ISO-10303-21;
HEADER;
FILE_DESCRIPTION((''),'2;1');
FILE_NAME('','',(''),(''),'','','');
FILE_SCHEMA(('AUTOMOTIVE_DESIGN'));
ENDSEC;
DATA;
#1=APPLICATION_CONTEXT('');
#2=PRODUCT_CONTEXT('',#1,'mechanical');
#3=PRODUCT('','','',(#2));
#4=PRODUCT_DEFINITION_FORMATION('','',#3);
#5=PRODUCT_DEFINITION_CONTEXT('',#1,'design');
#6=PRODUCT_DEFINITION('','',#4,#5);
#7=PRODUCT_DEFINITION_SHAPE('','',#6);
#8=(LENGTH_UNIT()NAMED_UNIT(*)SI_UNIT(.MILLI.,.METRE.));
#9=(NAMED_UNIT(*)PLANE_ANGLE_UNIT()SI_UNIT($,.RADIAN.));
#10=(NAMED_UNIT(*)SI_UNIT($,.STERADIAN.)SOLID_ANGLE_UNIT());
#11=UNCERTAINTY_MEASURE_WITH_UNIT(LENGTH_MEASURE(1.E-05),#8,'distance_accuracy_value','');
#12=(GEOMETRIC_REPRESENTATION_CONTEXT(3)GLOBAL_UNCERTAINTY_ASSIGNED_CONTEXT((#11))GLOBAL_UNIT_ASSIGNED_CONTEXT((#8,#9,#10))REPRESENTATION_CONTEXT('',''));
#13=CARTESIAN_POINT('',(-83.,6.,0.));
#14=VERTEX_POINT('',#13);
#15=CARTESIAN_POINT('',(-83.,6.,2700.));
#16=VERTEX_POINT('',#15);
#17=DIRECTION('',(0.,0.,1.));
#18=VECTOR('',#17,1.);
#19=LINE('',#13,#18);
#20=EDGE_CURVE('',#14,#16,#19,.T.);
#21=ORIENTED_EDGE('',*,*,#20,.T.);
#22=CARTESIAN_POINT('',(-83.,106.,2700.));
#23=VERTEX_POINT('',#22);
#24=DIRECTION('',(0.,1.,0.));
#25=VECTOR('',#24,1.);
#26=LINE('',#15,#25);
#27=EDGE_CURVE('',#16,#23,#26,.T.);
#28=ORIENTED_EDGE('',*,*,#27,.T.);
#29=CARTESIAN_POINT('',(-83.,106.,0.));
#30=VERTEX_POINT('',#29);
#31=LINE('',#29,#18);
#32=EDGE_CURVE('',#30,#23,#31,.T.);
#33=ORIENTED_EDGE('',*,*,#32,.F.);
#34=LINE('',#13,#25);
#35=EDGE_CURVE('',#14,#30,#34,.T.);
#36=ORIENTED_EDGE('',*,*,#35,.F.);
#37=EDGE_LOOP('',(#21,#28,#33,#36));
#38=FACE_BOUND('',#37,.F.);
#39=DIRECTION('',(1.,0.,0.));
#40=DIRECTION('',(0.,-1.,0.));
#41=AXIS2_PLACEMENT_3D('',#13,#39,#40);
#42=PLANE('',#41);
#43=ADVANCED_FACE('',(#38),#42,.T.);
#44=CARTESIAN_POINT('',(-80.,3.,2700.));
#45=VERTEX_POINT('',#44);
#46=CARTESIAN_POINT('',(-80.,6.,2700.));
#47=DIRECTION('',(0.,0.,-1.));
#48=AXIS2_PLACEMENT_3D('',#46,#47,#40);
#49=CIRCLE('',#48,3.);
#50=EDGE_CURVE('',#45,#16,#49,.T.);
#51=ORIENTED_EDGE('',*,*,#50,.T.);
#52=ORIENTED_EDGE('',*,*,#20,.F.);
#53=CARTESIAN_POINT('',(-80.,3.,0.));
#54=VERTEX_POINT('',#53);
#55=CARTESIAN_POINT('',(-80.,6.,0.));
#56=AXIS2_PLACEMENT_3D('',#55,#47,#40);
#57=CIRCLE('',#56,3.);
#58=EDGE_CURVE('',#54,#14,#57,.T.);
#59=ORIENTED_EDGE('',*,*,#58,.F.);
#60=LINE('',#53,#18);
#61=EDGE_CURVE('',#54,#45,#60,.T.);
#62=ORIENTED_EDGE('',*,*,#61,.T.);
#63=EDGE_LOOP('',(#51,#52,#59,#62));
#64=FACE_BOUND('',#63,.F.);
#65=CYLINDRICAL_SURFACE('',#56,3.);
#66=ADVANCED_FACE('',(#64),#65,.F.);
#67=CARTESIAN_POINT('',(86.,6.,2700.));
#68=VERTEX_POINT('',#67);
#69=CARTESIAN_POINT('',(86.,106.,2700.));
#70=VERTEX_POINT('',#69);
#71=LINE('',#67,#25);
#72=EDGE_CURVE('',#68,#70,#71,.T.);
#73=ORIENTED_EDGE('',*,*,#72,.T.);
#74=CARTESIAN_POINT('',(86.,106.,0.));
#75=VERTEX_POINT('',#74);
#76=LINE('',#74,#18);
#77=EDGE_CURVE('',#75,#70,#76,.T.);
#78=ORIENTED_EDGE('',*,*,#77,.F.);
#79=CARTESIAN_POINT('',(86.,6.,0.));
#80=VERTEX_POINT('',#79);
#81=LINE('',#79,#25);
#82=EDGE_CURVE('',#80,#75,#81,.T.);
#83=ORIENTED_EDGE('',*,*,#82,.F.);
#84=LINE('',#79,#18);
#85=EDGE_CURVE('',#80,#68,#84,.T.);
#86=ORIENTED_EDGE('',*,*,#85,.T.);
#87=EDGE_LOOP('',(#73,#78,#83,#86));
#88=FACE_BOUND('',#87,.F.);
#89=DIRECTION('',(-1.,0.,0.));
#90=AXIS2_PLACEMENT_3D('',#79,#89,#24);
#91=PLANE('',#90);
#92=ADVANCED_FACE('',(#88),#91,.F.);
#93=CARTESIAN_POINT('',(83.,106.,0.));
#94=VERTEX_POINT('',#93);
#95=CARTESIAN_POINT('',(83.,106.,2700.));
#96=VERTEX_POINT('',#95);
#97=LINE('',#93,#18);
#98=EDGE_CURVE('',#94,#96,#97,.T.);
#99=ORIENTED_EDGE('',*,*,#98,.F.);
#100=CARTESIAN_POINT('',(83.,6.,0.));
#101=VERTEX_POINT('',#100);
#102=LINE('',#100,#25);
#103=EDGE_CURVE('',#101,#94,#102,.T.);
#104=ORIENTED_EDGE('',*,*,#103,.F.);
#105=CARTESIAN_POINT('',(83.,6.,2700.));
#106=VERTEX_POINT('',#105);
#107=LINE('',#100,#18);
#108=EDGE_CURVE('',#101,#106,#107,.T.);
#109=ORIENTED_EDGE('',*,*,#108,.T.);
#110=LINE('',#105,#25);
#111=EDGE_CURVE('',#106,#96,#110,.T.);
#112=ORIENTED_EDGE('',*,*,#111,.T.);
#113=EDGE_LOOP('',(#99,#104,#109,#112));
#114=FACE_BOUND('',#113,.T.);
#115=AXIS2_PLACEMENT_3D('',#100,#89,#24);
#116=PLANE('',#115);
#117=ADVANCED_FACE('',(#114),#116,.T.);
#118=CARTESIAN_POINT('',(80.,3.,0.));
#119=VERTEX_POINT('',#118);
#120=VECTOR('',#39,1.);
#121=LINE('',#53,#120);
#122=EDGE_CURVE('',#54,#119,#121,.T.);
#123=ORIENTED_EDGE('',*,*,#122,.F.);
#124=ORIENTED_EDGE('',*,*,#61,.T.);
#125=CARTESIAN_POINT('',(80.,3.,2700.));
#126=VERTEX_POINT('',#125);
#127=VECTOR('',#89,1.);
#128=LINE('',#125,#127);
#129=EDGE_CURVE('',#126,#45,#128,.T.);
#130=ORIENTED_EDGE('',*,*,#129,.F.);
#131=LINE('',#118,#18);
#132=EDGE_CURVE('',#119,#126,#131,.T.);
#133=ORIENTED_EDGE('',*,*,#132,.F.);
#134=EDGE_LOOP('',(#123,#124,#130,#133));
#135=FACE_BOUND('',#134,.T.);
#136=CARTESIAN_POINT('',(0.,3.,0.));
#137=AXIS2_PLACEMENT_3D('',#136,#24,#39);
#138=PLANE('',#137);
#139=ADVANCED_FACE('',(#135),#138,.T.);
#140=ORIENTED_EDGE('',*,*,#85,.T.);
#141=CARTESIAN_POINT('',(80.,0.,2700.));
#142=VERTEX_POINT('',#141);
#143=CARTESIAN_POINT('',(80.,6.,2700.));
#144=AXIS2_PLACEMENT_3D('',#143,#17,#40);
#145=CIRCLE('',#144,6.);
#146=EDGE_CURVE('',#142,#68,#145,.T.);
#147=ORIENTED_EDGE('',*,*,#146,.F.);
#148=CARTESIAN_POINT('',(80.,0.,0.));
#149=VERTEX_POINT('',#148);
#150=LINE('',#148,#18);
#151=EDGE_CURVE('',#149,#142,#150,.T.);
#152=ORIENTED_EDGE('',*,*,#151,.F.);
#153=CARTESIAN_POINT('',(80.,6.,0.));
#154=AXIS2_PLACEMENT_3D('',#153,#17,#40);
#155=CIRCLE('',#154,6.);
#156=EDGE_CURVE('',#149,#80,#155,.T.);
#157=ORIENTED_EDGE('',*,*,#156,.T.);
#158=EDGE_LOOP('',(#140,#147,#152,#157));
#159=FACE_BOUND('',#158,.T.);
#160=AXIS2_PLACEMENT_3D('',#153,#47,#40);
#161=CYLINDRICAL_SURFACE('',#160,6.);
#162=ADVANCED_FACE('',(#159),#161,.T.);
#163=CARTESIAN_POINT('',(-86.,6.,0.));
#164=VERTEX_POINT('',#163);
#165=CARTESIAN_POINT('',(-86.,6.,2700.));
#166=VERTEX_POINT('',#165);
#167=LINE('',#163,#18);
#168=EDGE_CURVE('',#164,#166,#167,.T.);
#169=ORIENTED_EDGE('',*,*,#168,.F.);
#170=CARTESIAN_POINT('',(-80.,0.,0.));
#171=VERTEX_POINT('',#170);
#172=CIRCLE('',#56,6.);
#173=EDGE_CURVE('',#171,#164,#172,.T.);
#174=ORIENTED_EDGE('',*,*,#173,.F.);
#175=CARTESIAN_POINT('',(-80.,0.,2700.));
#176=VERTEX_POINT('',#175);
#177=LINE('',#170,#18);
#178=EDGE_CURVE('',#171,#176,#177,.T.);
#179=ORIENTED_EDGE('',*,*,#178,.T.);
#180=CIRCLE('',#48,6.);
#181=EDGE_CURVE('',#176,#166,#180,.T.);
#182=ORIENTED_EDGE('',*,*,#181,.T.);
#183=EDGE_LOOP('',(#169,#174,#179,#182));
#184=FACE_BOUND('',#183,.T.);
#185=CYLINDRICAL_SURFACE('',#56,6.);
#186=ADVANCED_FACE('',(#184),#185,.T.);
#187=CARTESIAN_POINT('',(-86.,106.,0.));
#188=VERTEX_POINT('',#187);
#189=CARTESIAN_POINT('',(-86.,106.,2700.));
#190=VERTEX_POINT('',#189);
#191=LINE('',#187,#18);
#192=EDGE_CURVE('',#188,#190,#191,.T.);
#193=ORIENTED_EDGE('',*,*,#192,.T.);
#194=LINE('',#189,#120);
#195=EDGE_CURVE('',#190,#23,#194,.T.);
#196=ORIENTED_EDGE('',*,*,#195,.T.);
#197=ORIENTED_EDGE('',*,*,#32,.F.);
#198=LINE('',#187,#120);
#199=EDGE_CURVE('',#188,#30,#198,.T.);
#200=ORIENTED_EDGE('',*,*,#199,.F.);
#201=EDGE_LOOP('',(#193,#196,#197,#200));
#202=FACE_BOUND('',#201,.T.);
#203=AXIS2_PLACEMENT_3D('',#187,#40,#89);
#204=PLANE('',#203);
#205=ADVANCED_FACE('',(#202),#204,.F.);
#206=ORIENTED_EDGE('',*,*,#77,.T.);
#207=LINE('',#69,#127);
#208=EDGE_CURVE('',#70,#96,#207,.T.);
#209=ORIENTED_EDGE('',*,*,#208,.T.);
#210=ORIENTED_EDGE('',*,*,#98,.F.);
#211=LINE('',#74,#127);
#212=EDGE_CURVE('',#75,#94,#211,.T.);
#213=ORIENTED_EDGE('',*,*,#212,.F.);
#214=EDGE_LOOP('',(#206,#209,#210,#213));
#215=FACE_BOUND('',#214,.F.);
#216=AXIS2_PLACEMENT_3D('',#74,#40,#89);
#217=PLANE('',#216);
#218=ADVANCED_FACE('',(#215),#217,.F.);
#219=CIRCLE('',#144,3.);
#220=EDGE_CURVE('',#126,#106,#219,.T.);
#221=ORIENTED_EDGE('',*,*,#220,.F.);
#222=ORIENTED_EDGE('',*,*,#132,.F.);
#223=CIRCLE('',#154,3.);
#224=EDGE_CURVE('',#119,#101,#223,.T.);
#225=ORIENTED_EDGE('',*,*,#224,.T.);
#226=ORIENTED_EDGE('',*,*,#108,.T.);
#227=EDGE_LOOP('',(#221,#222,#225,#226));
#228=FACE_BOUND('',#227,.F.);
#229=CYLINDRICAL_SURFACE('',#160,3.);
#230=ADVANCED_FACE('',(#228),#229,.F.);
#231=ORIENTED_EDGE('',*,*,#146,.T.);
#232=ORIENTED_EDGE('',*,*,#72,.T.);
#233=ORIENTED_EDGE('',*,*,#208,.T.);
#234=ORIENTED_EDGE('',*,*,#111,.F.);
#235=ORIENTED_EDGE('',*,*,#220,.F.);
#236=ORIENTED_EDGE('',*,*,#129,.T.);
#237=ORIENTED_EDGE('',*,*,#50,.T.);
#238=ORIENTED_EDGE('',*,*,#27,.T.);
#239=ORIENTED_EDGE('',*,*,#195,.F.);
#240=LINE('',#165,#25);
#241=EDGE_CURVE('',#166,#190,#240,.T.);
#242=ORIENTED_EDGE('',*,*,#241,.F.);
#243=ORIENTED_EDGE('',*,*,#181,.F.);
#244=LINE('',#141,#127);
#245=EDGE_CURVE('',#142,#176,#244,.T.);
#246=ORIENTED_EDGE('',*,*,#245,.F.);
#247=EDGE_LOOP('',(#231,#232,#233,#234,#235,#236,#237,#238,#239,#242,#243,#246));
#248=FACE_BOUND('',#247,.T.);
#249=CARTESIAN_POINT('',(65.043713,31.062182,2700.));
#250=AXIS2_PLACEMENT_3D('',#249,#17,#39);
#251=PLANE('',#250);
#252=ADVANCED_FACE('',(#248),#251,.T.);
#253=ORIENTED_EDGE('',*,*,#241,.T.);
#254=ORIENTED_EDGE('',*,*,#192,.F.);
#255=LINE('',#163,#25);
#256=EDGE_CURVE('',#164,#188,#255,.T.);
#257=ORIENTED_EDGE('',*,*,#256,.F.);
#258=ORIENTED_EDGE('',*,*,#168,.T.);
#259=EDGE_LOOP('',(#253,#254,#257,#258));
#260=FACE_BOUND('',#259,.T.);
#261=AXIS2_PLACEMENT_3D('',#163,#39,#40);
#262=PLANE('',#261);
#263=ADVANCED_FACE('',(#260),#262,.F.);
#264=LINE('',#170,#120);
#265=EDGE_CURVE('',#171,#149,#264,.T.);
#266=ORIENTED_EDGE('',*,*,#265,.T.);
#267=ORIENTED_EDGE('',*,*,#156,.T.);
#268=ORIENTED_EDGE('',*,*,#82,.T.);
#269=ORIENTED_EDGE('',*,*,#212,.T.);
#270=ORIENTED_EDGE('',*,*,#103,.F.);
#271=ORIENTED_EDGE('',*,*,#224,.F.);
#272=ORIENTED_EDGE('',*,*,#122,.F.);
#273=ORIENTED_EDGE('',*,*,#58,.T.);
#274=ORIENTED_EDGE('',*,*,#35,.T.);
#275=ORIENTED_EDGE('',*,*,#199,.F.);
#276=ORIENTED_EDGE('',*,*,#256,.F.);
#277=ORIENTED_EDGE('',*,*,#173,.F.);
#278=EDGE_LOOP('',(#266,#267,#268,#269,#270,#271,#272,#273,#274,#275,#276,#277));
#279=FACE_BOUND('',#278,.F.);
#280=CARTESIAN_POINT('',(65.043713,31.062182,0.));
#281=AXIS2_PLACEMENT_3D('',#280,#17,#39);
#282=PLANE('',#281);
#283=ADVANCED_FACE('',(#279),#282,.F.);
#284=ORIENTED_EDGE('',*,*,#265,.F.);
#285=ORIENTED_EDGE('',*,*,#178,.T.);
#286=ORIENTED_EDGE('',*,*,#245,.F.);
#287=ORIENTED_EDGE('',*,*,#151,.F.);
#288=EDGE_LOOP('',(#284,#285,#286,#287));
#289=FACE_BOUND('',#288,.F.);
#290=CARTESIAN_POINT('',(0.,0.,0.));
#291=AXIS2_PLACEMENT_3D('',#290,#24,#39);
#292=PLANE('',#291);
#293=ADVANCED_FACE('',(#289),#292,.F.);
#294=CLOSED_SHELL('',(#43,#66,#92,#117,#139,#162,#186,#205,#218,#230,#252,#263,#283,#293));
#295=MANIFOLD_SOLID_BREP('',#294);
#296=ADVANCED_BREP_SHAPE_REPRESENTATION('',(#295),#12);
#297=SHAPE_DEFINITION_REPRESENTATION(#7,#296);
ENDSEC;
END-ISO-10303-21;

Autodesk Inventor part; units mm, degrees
ref_plane "YZ Plane" through (0, 0, 0) normal (1, 0, 0) x (0, 1, 0)
ref_plane "XZ Plane" through (0, 0, 0) normal (0, 1, 0) x (-1, 0, 0)
ref_plane "XY Plane" through (0, 0, 0) normal (0, 0, 1) x (1, 0, 0)
sketch "Sketch1" plane through (0, 0, 0) normal (0, 0, 1) x (1, 0, 0)
  line L0 (86, 6) -> (86, 106)
  line L1 (2021.3603, 237.2065) -> (2021.3603, 237.2065) construction
  arc A0 (80, 0) -> (86, 6) centre (80, 6) ccw
  line L2 (0, 0) -> (80, 0)
  dimension "d25" = 6
  dimension "d46" = 90
  dimension "d47" = 80
  dimension "d48" = 100
contour flange "Contour Flange1" sketch "Sketch1" thickness 3 bend radius 3 width 2700 along (0, 0, 1) mid plane no both sides no wall seen from (40, 0, 0) lies toward (0, 1, 0) curves L2 A0 L0
bend "Bend1"
corner "Corner1"
mirror "Mirror1" about plane through (0, 0, 0) normal (1, 0, 0)
equation "\"d25\" = Thickness + BendRadius"
equation "\"d7\" = Thickness"
equation "\"d8\" = BendReliefWidth"
equation "\"d9\" = BendReliefDepth"
equation "\"d10\" = MinimumRemnant"
equation "\"d11\" = TransitionRadius"
equation "\"d13\" = BendRadius"
equation "\"d15\" = CornerReliefSize"
equation "\"d16\" = GapSize"
equation "\"d17\" = JacobiRadiusSize"
equation "\"BendRadius\" = Thickness"
equation "\"BendReliefWidth\" = Thickness"
equation "\"BendReliefDepth\" = 0.5 * Thickness"
equation "\"CornerReliefSize\" = 4 * Thickness"
equation "\"MinimumRemnant\" = 2 * Thickness"
equation "\"TransitionRadius\" = BendRadius"
equation "\"JacobiRadiusSize\" = BendRadius"
equation "\"GapSize\" = Thickness"
equation "\"d38\" = d40 + d44"
equation "\"d39\" = d40"
equation "\"d44\" = d40"
equation "\"Thickness\" = 3"
equation "\"d40\" = 3"
properties part number "MSC 077 screen pillar" material "Stainless Steel"
